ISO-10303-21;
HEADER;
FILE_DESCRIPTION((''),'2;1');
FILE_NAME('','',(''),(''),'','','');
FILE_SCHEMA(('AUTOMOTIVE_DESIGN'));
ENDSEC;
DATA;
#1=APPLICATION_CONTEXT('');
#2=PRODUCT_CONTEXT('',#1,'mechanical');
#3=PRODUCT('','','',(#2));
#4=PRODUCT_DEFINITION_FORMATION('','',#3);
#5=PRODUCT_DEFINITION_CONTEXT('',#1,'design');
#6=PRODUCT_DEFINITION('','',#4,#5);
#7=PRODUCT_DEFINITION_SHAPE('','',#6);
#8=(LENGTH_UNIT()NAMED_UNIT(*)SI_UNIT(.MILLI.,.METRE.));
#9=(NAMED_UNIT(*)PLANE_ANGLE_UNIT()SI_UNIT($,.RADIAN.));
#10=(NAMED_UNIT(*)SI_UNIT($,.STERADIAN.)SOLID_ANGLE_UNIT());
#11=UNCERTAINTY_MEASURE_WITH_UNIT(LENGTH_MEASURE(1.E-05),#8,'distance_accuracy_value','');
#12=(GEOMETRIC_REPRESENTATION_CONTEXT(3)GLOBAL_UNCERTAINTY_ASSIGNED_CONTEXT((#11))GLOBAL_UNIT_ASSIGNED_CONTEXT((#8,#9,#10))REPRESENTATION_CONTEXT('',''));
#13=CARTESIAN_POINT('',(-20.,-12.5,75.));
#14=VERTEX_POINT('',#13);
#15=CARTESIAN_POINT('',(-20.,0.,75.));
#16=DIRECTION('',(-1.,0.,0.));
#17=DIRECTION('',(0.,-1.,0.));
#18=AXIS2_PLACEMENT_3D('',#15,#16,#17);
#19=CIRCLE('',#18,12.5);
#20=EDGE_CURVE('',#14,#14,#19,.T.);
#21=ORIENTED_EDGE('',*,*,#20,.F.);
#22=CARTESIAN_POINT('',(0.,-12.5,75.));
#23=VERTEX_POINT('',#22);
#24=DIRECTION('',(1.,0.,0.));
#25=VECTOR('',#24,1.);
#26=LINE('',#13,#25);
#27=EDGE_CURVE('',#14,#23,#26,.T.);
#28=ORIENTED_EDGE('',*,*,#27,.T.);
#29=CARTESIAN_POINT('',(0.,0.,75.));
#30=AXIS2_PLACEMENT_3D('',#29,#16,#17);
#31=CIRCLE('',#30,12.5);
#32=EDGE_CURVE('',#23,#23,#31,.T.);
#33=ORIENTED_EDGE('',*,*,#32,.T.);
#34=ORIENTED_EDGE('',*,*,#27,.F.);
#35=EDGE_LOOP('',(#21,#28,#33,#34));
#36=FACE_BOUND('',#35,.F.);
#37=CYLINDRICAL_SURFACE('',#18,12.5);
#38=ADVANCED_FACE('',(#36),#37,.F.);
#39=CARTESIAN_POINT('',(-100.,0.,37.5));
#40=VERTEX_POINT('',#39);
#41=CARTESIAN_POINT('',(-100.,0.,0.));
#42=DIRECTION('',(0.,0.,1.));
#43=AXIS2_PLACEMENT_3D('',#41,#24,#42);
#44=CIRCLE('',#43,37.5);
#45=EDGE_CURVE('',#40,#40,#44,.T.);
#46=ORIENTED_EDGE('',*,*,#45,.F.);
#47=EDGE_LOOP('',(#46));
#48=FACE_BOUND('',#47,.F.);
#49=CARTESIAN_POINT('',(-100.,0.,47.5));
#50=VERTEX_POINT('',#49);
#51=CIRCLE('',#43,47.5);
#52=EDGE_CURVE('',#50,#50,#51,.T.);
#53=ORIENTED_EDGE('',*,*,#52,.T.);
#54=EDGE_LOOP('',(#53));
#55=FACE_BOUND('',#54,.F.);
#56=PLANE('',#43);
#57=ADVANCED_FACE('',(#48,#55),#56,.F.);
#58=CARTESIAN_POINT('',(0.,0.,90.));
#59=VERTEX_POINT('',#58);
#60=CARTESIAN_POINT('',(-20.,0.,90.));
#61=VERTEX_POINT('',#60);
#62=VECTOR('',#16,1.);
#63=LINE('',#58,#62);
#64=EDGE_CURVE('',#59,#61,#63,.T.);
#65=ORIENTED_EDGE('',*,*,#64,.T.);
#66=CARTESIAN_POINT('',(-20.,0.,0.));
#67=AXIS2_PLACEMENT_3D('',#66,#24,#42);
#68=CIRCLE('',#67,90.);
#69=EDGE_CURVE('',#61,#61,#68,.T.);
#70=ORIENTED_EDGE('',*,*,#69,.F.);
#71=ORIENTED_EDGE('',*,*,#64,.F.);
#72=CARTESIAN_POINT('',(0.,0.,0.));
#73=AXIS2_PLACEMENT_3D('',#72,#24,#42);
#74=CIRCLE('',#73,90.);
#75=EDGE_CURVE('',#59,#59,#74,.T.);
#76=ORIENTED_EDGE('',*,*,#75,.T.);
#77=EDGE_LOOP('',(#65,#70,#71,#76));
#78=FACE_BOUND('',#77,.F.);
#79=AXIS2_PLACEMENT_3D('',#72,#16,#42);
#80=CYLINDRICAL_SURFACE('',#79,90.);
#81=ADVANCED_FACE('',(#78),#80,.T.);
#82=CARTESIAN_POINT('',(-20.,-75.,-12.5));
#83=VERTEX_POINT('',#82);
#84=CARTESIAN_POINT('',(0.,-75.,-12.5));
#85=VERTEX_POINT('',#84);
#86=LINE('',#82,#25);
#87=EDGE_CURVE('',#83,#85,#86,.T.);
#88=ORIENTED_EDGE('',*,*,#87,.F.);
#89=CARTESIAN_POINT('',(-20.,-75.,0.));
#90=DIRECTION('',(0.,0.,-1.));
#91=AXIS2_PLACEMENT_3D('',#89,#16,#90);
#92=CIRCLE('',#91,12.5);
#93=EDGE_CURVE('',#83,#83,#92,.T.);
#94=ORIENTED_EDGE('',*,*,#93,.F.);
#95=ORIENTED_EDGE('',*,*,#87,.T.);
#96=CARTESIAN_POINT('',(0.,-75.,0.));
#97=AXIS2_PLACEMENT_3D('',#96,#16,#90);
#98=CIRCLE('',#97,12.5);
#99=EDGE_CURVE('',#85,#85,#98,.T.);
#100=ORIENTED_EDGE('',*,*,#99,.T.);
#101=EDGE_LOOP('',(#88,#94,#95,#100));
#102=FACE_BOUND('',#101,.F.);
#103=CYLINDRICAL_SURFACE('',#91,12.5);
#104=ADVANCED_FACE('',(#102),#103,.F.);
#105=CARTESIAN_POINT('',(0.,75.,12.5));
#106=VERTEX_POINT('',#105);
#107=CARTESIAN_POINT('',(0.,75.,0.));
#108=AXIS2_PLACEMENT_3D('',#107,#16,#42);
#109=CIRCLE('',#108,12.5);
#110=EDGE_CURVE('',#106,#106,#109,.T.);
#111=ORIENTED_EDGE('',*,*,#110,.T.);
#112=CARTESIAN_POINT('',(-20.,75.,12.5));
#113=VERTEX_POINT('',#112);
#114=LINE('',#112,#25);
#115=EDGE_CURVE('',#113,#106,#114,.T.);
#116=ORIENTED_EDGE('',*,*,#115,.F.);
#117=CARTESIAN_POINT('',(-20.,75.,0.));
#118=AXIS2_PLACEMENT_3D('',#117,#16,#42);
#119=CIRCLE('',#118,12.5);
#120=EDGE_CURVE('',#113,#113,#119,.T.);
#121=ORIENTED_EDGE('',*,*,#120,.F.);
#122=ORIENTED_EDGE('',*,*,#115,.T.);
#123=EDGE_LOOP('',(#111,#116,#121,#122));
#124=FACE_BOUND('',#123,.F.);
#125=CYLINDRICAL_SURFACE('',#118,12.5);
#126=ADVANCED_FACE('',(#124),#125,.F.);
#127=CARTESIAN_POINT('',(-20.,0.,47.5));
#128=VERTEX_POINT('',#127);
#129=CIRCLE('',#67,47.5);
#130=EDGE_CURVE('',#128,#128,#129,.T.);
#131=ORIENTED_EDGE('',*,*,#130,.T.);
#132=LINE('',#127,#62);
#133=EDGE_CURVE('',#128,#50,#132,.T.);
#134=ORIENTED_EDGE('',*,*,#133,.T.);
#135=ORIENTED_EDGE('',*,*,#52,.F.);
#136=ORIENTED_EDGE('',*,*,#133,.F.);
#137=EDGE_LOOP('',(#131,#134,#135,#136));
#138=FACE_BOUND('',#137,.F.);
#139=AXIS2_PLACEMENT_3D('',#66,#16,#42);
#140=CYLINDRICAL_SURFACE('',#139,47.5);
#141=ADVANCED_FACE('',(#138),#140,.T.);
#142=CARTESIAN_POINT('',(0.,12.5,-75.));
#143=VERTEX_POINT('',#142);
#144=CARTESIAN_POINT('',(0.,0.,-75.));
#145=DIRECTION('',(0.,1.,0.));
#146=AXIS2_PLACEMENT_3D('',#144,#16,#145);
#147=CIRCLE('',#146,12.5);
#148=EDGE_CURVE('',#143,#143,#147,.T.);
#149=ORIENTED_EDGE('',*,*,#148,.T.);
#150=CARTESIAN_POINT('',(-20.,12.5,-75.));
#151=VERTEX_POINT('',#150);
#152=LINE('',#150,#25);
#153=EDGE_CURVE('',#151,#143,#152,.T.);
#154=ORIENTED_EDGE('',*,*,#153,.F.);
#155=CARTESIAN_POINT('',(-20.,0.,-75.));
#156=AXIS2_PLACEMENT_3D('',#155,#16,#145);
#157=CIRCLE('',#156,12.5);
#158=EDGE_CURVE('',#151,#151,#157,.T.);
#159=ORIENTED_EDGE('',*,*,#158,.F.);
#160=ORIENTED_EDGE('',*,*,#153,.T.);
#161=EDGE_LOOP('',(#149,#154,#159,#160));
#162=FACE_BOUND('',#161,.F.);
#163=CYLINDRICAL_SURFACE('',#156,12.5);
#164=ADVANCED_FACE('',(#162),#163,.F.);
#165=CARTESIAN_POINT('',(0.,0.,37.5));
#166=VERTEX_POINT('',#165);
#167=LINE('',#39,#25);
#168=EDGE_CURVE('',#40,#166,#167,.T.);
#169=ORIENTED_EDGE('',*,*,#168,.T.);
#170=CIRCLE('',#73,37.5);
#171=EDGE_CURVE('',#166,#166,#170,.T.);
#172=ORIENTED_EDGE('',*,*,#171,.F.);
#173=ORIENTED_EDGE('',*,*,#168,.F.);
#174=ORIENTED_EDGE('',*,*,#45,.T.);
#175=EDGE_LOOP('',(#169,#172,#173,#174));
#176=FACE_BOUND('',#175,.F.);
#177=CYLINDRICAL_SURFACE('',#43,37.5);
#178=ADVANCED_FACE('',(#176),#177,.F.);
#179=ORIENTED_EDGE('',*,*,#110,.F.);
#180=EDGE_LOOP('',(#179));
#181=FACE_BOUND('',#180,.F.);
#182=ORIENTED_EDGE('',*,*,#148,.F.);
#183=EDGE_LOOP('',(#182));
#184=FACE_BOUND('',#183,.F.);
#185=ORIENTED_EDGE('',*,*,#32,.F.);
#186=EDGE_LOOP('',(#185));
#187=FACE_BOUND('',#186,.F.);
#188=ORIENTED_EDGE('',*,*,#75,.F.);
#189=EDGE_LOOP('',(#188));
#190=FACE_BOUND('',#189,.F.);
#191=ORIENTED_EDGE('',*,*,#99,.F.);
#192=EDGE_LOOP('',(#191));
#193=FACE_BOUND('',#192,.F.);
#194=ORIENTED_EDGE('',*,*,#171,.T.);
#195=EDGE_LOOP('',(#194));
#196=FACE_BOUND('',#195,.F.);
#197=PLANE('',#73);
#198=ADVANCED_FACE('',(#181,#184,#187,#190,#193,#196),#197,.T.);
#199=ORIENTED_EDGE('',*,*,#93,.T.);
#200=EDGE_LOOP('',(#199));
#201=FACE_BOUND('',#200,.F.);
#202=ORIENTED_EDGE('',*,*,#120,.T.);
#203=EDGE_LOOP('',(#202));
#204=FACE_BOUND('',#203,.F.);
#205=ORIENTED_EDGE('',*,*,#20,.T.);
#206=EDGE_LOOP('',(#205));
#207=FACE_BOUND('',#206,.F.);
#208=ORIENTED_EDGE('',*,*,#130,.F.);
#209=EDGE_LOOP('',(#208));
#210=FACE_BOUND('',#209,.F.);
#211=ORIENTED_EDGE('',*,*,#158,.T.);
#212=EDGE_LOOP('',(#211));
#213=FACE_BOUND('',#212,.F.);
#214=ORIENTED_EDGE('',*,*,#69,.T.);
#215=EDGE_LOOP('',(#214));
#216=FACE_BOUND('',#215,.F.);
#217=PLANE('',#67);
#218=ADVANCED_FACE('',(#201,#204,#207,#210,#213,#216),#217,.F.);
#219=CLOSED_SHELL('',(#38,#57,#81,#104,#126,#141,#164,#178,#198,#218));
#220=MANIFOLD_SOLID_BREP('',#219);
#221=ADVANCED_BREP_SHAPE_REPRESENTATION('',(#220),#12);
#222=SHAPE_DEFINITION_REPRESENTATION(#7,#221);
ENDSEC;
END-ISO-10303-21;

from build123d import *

# Parameters (mm, degrees)
F2_R            = 12.5
F3_DEPTH        = 281
F3_COPIES_COUNT = 4


# Not quite as in the source:
# - a pattern or mirror of a feature is missing from the dataset's text; its kind, count and spacing are read off the source's solid


with BuildPart() as f1:
    # F0 (on Front) → F1 (revolve)
    with BuildSketch(Plane.XZ):
        Polygon((-100, 37.5), (0, 37.5), (0, 90), (-20, 90), (-20, 47.5), (-100, 47.5), align=None)
    revolve(axis=Axis((-60.572553426, 0, 0), (1, 0, 0)))

    # F2 (on face) → F3 (cut)
    with BuildSketch(Plane(origin=(-20, 0, 0), x_dir=(0, -1, 0), z_dir=(-1, 0, 0))):
        with Locations((0, 75)):
            Circle(F2_R)
    f3 = extrude(amount=-F3_DEPTH, mode=Mode.SUBTRACT)

    # F3_copies: F3 ×4 about axis
    f3_copies_axis = Axis((0, 0, 0), (1, 0, 0))
    for i in range(1, F3_COPIES_COUNT):
        add(f3.rotate(f3_copies_axis, i * 360 / F3_COPIES_COUNT), mode=Mode.SUBTRACT)


solid = f1.part
